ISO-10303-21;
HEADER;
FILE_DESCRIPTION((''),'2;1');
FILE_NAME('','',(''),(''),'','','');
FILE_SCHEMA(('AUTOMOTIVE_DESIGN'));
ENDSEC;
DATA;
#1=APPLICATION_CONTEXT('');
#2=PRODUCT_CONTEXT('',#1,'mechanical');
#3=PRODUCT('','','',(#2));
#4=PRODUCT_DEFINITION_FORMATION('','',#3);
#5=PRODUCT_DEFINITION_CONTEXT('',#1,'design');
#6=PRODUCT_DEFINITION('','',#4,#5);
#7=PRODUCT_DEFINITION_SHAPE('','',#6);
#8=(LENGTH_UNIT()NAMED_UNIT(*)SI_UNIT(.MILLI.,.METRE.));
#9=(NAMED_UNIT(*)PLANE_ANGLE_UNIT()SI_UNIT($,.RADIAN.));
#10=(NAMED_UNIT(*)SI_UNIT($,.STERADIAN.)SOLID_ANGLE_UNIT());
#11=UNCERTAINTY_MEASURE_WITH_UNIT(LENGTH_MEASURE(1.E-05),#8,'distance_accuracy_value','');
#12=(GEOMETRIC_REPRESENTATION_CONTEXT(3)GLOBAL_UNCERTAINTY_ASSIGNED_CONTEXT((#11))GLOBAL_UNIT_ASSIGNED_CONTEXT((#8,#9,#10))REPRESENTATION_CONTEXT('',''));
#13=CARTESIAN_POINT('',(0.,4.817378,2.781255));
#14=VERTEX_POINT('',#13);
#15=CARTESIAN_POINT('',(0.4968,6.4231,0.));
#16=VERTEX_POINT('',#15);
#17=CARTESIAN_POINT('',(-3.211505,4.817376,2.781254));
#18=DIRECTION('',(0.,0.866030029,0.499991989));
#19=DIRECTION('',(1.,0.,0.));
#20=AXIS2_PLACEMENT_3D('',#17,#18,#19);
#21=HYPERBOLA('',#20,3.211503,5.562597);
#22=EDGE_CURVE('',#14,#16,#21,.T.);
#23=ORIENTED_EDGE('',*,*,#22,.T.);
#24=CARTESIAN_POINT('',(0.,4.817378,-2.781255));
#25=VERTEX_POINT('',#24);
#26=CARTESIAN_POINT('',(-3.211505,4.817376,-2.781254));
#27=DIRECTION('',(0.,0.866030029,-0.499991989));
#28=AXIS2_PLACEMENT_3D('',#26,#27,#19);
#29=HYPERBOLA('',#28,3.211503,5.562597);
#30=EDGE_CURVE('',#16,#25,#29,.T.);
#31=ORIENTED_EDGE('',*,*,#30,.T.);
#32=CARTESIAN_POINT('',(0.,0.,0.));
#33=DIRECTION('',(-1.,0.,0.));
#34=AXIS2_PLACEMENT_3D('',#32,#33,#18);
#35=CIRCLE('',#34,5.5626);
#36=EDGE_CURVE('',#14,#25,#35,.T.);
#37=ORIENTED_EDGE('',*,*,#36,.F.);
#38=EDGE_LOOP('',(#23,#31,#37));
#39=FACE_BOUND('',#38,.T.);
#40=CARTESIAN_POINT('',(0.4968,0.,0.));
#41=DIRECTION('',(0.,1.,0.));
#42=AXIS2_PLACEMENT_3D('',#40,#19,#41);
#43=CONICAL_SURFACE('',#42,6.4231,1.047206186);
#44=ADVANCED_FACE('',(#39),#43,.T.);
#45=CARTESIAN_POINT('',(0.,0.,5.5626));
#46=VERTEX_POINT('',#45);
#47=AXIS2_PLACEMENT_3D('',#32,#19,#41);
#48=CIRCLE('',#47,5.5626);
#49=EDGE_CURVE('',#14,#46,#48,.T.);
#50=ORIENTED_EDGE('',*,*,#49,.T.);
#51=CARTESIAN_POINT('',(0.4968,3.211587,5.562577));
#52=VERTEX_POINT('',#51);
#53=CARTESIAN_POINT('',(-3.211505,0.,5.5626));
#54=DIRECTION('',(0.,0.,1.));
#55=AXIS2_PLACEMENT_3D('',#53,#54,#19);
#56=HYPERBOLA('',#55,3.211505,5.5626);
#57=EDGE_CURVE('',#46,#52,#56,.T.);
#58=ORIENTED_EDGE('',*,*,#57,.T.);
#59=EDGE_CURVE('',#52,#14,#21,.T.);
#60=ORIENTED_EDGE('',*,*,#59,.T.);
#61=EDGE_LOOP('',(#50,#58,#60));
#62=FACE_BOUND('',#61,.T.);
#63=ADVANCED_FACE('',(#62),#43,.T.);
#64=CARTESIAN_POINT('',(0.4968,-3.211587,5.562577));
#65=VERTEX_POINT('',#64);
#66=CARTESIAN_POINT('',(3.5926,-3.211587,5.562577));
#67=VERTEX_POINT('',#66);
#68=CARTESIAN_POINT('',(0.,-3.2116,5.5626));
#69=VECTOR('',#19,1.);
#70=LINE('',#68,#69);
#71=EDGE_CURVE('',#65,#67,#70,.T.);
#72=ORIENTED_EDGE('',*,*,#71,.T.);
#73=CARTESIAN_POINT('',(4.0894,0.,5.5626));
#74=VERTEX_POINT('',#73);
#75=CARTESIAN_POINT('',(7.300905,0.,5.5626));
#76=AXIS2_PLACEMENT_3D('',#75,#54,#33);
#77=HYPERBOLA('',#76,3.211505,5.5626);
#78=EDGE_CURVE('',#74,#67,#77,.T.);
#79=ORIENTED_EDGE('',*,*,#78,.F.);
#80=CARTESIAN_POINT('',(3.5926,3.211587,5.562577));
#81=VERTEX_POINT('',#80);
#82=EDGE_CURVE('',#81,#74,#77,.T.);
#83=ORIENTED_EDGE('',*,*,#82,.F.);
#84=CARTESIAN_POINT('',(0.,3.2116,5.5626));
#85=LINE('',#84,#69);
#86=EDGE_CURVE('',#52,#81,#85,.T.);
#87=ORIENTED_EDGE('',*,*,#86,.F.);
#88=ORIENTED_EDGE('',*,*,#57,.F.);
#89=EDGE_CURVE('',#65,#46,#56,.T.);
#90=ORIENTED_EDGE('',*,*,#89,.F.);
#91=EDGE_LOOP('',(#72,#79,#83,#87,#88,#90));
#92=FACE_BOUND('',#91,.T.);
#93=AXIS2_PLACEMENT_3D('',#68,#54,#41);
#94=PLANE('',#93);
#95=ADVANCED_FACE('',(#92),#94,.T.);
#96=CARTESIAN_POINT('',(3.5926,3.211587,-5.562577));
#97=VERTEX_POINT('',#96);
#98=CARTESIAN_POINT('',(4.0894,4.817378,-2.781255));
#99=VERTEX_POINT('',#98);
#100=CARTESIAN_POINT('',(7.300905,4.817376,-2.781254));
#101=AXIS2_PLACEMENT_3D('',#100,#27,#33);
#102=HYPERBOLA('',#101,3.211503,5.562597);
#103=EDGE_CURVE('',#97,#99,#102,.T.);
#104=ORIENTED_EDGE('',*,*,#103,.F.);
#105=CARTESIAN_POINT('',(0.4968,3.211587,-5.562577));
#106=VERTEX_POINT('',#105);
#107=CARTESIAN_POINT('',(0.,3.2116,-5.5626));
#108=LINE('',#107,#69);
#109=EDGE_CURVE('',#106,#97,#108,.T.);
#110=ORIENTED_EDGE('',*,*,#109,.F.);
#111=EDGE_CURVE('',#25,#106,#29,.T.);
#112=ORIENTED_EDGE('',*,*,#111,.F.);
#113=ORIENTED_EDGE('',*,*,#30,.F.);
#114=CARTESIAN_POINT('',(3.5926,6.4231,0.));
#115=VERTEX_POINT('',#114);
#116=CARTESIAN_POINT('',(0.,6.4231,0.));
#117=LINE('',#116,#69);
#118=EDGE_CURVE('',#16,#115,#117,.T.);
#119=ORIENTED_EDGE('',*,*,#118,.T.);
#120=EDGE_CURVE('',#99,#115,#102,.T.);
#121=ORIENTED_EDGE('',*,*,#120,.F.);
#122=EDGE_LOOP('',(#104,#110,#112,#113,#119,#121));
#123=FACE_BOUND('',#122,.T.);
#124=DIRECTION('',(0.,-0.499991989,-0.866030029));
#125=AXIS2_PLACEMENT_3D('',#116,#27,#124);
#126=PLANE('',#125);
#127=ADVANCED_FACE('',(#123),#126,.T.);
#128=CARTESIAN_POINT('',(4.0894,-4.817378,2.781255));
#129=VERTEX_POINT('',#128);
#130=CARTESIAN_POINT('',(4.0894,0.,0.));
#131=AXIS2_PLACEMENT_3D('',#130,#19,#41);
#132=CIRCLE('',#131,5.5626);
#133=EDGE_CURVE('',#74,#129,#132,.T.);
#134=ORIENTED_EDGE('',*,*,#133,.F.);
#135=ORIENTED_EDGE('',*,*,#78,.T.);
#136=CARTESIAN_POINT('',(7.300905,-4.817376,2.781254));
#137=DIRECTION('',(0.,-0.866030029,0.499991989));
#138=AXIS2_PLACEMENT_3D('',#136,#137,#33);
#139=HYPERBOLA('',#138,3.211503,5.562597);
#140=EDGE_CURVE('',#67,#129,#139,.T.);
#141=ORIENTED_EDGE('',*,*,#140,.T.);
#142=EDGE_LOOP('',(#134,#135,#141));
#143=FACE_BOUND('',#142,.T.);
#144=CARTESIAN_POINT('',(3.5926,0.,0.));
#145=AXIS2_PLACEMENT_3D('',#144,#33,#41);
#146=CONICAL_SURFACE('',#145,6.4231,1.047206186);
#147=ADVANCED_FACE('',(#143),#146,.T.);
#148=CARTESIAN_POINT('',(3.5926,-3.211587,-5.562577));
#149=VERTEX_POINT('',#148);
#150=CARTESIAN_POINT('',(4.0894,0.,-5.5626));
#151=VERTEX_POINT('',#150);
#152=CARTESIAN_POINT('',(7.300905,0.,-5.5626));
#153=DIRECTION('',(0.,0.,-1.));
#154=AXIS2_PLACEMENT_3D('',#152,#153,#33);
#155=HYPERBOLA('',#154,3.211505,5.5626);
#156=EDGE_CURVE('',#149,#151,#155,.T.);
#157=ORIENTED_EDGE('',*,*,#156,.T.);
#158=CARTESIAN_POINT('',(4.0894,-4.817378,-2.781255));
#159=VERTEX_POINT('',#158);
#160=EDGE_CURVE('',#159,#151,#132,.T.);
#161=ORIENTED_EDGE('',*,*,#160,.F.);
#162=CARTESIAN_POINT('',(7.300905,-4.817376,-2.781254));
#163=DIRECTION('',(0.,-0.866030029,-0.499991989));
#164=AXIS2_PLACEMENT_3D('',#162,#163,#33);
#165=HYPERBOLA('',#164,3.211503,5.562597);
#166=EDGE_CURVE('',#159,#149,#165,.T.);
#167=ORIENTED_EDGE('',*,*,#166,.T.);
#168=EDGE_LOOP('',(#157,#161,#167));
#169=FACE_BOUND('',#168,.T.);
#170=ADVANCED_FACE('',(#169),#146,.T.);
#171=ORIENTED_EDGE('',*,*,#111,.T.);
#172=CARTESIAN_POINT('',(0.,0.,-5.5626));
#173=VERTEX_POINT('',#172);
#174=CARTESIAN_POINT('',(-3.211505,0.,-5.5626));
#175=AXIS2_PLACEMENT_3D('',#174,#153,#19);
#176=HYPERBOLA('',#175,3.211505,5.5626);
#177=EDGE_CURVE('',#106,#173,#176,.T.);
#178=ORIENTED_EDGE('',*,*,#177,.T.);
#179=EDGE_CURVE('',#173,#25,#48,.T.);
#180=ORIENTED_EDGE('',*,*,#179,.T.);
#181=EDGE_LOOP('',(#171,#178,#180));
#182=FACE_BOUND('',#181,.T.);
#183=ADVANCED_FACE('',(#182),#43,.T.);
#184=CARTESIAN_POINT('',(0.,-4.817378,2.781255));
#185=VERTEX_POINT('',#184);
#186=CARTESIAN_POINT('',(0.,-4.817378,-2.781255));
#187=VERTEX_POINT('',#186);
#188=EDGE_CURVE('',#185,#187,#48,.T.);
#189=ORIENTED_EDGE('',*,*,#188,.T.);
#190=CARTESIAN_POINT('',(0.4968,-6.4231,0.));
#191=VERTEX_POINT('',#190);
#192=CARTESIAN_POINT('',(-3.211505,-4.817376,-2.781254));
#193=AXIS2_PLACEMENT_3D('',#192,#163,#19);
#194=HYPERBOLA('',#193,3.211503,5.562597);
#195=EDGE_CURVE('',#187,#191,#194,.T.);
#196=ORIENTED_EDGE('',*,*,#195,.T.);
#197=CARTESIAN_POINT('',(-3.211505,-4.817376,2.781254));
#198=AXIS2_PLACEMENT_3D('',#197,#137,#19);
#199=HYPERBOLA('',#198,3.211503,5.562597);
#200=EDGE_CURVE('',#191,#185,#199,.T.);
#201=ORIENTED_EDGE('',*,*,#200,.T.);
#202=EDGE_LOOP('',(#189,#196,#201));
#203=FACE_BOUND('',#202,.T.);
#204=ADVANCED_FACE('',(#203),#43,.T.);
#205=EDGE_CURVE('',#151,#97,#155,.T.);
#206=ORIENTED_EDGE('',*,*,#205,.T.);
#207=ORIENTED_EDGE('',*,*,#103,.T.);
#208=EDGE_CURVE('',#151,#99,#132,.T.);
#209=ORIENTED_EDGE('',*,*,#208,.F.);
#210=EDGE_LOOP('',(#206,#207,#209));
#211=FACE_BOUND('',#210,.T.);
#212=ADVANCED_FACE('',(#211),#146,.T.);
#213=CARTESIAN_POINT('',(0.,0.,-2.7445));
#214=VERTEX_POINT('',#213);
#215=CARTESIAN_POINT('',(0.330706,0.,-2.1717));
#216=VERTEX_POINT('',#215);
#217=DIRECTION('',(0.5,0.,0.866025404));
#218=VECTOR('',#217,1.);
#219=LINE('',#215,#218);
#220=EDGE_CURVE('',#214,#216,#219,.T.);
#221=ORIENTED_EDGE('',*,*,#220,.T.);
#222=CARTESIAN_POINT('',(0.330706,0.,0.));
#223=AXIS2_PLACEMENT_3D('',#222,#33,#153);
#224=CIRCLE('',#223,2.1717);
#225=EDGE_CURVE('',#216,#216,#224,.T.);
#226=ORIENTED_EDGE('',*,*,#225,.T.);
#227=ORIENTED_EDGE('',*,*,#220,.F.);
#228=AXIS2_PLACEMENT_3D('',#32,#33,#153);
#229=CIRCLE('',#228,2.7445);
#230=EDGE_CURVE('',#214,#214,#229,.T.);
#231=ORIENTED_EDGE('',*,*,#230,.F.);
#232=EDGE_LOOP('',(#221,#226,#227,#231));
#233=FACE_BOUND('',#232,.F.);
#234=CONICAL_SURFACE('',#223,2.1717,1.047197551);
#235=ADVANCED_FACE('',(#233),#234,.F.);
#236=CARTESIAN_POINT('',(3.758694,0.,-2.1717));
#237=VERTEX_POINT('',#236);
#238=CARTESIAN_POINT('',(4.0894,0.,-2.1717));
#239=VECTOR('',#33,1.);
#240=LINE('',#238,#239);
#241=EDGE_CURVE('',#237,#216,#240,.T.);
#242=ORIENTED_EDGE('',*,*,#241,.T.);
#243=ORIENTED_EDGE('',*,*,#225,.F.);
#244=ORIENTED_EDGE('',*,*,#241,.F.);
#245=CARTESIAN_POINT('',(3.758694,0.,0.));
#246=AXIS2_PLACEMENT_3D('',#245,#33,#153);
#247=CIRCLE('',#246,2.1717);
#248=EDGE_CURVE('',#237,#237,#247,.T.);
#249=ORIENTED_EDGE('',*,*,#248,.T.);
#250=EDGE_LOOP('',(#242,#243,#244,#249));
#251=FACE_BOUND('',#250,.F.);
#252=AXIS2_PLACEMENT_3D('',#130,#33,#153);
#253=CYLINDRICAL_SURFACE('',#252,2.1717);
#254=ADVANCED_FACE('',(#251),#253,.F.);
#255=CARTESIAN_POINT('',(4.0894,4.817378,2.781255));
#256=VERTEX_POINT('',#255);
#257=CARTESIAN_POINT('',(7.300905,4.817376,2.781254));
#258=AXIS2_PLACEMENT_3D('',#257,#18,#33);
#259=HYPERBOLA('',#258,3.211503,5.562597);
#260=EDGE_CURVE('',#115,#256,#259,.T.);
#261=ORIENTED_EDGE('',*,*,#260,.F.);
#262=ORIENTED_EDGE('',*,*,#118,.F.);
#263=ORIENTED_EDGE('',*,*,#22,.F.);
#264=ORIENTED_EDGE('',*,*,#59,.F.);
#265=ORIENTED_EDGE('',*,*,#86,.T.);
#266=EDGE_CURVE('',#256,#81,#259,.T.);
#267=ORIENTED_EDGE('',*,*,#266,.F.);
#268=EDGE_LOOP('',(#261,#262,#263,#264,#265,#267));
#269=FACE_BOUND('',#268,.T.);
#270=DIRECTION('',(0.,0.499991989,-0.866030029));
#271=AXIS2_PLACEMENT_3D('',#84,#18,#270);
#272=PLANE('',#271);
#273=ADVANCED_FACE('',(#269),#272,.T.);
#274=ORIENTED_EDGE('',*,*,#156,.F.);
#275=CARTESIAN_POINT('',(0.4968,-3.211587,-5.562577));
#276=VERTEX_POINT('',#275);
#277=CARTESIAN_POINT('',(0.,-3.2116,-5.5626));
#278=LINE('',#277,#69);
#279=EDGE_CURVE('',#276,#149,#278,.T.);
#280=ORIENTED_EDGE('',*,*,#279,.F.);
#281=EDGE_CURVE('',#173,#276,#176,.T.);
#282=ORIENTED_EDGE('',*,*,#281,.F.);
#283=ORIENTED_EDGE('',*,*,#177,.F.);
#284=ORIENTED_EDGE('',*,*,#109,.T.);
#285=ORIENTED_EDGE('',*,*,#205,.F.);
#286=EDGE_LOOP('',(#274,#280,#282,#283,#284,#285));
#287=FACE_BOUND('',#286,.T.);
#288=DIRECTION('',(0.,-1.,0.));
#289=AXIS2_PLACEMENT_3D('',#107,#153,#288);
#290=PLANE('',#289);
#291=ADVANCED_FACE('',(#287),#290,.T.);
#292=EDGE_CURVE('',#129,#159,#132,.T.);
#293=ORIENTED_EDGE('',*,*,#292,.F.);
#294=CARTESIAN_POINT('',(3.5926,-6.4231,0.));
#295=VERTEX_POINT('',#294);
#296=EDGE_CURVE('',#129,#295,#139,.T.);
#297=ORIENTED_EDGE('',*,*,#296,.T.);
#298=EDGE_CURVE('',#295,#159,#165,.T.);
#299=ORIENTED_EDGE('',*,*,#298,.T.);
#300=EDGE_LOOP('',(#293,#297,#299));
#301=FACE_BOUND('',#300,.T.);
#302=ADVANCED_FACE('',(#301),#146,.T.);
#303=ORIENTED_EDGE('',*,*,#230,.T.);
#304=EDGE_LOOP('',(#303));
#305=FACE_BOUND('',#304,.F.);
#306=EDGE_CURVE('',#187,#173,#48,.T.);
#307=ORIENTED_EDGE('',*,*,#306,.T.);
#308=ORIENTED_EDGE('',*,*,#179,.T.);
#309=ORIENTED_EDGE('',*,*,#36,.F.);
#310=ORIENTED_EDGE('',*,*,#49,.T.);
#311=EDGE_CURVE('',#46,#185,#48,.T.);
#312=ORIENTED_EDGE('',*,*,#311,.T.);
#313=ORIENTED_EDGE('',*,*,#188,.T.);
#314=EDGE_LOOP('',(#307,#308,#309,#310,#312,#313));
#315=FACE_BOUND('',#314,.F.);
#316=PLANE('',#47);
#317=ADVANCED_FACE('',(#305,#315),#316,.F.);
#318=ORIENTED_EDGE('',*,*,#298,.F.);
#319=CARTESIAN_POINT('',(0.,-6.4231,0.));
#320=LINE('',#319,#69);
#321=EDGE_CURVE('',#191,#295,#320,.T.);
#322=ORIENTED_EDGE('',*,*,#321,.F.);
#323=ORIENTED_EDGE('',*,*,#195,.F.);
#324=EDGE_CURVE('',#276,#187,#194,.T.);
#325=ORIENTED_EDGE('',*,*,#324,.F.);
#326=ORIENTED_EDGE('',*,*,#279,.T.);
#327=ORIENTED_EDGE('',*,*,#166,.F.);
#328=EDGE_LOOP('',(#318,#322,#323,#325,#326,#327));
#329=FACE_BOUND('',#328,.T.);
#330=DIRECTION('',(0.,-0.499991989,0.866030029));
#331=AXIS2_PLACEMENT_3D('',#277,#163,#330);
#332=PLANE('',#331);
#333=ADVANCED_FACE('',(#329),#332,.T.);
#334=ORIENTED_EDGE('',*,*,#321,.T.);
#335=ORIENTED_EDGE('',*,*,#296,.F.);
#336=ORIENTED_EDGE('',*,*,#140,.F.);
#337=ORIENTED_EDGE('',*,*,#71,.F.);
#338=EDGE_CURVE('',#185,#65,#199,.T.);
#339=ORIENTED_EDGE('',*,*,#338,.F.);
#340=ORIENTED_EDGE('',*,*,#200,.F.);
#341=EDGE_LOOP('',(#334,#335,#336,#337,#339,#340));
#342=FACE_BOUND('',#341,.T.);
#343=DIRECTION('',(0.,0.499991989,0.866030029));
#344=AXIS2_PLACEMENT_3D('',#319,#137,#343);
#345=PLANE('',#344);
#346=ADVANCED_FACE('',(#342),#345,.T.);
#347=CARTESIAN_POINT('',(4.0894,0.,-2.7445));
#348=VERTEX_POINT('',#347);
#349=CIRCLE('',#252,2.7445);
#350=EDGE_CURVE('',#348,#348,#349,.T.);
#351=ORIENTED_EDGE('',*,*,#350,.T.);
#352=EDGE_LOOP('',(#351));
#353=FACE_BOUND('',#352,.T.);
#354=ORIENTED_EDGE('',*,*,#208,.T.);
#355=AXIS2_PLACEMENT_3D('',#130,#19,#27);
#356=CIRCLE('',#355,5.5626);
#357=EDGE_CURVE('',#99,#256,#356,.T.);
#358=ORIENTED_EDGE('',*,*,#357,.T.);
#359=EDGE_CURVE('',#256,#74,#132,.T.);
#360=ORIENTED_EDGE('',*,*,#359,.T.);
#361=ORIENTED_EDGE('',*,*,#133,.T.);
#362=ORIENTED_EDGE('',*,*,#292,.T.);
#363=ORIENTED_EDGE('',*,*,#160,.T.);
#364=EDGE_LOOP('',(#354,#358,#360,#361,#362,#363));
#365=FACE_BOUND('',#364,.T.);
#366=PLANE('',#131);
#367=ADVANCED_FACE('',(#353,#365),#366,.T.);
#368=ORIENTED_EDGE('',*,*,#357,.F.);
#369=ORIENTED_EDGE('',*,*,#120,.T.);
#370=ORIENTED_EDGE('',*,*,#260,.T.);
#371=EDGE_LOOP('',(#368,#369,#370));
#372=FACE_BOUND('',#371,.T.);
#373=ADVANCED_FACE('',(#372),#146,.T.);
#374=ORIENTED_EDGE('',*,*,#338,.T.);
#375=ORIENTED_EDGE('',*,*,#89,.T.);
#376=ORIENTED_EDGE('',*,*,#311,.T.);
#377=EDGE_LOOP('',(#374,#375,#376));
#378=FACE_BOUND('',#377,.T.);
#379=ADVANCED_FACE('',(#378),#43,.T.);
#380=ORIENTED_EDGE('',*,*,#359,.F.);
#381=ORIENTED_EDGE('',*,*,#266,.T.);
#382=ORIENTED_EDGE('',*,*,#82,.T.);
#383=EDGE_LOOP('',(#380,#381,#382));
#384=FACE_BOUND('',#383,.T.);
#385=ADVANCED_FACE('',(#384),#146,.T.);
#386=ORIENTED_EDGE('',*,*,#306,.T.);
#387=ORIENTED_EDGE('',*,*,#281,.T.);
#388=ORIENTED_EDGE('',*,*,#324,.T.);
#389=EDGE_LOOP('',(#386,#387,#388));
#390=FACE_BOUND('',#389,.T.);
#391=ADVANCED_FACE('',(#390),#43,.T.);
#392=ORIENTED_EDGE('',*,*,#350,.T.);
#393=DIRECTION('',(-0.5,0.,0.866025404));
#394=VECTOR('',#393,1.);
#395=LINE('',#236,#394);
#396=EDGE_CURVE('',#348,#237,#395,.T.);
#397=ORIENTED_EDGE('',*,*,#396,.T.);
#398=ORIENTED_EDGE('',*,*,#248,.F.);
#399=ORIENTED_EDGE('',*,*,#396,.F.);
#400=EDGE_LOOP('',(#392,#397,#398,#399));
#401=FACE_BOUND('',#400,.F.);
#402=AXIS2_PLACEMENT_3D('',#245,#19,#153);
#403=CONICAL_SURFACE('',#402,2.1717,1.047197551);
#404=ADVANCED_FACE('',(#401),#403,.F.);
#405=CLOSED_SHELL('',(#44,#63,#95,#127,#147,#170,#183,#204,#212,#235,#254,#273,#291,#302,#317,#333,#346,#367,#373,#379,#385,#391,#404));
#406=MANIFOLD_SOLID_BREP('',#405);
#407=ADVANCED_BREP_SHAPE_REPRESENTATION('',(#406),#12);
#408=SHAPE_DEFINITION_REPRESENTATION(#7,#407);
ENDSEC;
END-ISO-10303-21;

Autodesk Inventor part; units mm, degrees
ref_plane "YZ Plane" through (0, 0, 0) normal (1, 0, 0) x (0, 1, 0)
ref_plane "XZ Plane" through (0, 0, 0) normal (0, 1, 0) x (-1, 0, 0)
sketch "Szkic1" plane through (0, 0, 0) normal (1, 0, 0) x (0, 1, 0)
  line L0 (-6.4231, 0) -> (-3.2116, 5.5626)
  line L1 (-3.2116, 5.5626) -> (3.2116, 5.5626)
  line L2 (3.2116, 5.5626) -> (6.4231, 0)
  line L3 (6.4231, 0) -> (3.2116, -5.5626)
  line L4 (3.2116, -5.5626) -> (-3.2116, -5.5626)
  line L5 (-3.2116, -5.5626) -> (-6.4231, 0)
  point P0 (0, 0)
  point P1 (0, 0)
  dimension "d0" = 12.8463
extrude "Bryła" add sketch "Szkic1" along normal blind 4.0894
sketch "Szkic2" plane through (0, 0, 0) normal (0, 0, 1) x (1, 0, 0)
  line L0 (0, 3.2116) -> (0, 6.4231) projected
  line L1 (0, 6.4231) -> (4.0894, 6.4231) projected
  line L2 (4.0894, 3.2116) -> (4.0894, 6.4231) projected
  line L3 (-0.8179, 0) -> (4.9073, 0) projected
  line L4 (0.4968, 6.4231) -> (0, 5.5626)
  line L5 (3.5926, 6.4231) -> (4.0894, 5.5626)
  dimension "d3" = 30
  dimension "d4" = 30
  dimension "d5" = 11.1252
  dimension "d6" = 11.1252
revolve "Faza1" cut sketch "Szkic2" angle 360 about axis through (-10, 0, 0) along (1, 0, 0)
sketch "Szkic3" plane through (4.0894, 0, 0) normal (1, 0, 0) x (0, 0, -1)
  arc A0 (-2.7813, -4.8174) -> (2.7813, -4.8174) centre (0, 0) ccw projected
hole "Gwint" at (4.0894, 0, 0) direction (-1, 0, 0) diameter 4.3434 end through all thread size "12-24 UNC" class "2B" standard "ANSI Unified Screw Threads"
chamfer "Faza2" distance 0.5728 angle 30 1 edges at (4.0894, 0, 2.1717) measured on face at (4.0894, 4.4067, -0.0873)
chamfer "Faza3" distance 0.5728 angle 30 1 edges at (0, 0, 2.1717) measured on face at (0, 4.4067, 0.0873)
ref_plane "Work Plane1" through (-13.3897, 0, 0) normal (0, -0.8660254, -0.5) x (1, 0, 0)
equation "\"d0\" = 1.1547 * SW"
equation "\"d1\" = KOH"
equation "\"d8\" = -0.5 * GD1 + 0.5 * NND"
equation "\"d40\" = -0.5 * GD1 + 0.5 * NND"
equation "\"d10\" = -0.5 * GD1 + 0.5 * NND"
equation "\"d41\" = -0.5 * GD1 + 0.5 * NND"
equation "\"d3\" = ANG1"
equation "\"d4\" = ANG2"
equation "\"d5\" = SW0"
equation "\"d6\" = SW01"
equation "\"ANG1\" = 30deg"
equation "\"ANG2\" = 30deg"
equation "\"NND\" = 5.4864"
equation "\"KOH\" = 4.0894"
equation "\"SW\" = 11.1252"
equation "\"SW0\" = SW"
equation "\"SW01\" = SW"
equation "\"THREADDIA\" = 5.4864"
equation "\"TOA\" = 30deg"
equation "\"E0\" = 1.155 * SW"
equation "\"GD1\" = 4.340721"
properties part number "ANSI B18.2.2 - 12 - 24, HMSNI" material "Stal, miękka"
